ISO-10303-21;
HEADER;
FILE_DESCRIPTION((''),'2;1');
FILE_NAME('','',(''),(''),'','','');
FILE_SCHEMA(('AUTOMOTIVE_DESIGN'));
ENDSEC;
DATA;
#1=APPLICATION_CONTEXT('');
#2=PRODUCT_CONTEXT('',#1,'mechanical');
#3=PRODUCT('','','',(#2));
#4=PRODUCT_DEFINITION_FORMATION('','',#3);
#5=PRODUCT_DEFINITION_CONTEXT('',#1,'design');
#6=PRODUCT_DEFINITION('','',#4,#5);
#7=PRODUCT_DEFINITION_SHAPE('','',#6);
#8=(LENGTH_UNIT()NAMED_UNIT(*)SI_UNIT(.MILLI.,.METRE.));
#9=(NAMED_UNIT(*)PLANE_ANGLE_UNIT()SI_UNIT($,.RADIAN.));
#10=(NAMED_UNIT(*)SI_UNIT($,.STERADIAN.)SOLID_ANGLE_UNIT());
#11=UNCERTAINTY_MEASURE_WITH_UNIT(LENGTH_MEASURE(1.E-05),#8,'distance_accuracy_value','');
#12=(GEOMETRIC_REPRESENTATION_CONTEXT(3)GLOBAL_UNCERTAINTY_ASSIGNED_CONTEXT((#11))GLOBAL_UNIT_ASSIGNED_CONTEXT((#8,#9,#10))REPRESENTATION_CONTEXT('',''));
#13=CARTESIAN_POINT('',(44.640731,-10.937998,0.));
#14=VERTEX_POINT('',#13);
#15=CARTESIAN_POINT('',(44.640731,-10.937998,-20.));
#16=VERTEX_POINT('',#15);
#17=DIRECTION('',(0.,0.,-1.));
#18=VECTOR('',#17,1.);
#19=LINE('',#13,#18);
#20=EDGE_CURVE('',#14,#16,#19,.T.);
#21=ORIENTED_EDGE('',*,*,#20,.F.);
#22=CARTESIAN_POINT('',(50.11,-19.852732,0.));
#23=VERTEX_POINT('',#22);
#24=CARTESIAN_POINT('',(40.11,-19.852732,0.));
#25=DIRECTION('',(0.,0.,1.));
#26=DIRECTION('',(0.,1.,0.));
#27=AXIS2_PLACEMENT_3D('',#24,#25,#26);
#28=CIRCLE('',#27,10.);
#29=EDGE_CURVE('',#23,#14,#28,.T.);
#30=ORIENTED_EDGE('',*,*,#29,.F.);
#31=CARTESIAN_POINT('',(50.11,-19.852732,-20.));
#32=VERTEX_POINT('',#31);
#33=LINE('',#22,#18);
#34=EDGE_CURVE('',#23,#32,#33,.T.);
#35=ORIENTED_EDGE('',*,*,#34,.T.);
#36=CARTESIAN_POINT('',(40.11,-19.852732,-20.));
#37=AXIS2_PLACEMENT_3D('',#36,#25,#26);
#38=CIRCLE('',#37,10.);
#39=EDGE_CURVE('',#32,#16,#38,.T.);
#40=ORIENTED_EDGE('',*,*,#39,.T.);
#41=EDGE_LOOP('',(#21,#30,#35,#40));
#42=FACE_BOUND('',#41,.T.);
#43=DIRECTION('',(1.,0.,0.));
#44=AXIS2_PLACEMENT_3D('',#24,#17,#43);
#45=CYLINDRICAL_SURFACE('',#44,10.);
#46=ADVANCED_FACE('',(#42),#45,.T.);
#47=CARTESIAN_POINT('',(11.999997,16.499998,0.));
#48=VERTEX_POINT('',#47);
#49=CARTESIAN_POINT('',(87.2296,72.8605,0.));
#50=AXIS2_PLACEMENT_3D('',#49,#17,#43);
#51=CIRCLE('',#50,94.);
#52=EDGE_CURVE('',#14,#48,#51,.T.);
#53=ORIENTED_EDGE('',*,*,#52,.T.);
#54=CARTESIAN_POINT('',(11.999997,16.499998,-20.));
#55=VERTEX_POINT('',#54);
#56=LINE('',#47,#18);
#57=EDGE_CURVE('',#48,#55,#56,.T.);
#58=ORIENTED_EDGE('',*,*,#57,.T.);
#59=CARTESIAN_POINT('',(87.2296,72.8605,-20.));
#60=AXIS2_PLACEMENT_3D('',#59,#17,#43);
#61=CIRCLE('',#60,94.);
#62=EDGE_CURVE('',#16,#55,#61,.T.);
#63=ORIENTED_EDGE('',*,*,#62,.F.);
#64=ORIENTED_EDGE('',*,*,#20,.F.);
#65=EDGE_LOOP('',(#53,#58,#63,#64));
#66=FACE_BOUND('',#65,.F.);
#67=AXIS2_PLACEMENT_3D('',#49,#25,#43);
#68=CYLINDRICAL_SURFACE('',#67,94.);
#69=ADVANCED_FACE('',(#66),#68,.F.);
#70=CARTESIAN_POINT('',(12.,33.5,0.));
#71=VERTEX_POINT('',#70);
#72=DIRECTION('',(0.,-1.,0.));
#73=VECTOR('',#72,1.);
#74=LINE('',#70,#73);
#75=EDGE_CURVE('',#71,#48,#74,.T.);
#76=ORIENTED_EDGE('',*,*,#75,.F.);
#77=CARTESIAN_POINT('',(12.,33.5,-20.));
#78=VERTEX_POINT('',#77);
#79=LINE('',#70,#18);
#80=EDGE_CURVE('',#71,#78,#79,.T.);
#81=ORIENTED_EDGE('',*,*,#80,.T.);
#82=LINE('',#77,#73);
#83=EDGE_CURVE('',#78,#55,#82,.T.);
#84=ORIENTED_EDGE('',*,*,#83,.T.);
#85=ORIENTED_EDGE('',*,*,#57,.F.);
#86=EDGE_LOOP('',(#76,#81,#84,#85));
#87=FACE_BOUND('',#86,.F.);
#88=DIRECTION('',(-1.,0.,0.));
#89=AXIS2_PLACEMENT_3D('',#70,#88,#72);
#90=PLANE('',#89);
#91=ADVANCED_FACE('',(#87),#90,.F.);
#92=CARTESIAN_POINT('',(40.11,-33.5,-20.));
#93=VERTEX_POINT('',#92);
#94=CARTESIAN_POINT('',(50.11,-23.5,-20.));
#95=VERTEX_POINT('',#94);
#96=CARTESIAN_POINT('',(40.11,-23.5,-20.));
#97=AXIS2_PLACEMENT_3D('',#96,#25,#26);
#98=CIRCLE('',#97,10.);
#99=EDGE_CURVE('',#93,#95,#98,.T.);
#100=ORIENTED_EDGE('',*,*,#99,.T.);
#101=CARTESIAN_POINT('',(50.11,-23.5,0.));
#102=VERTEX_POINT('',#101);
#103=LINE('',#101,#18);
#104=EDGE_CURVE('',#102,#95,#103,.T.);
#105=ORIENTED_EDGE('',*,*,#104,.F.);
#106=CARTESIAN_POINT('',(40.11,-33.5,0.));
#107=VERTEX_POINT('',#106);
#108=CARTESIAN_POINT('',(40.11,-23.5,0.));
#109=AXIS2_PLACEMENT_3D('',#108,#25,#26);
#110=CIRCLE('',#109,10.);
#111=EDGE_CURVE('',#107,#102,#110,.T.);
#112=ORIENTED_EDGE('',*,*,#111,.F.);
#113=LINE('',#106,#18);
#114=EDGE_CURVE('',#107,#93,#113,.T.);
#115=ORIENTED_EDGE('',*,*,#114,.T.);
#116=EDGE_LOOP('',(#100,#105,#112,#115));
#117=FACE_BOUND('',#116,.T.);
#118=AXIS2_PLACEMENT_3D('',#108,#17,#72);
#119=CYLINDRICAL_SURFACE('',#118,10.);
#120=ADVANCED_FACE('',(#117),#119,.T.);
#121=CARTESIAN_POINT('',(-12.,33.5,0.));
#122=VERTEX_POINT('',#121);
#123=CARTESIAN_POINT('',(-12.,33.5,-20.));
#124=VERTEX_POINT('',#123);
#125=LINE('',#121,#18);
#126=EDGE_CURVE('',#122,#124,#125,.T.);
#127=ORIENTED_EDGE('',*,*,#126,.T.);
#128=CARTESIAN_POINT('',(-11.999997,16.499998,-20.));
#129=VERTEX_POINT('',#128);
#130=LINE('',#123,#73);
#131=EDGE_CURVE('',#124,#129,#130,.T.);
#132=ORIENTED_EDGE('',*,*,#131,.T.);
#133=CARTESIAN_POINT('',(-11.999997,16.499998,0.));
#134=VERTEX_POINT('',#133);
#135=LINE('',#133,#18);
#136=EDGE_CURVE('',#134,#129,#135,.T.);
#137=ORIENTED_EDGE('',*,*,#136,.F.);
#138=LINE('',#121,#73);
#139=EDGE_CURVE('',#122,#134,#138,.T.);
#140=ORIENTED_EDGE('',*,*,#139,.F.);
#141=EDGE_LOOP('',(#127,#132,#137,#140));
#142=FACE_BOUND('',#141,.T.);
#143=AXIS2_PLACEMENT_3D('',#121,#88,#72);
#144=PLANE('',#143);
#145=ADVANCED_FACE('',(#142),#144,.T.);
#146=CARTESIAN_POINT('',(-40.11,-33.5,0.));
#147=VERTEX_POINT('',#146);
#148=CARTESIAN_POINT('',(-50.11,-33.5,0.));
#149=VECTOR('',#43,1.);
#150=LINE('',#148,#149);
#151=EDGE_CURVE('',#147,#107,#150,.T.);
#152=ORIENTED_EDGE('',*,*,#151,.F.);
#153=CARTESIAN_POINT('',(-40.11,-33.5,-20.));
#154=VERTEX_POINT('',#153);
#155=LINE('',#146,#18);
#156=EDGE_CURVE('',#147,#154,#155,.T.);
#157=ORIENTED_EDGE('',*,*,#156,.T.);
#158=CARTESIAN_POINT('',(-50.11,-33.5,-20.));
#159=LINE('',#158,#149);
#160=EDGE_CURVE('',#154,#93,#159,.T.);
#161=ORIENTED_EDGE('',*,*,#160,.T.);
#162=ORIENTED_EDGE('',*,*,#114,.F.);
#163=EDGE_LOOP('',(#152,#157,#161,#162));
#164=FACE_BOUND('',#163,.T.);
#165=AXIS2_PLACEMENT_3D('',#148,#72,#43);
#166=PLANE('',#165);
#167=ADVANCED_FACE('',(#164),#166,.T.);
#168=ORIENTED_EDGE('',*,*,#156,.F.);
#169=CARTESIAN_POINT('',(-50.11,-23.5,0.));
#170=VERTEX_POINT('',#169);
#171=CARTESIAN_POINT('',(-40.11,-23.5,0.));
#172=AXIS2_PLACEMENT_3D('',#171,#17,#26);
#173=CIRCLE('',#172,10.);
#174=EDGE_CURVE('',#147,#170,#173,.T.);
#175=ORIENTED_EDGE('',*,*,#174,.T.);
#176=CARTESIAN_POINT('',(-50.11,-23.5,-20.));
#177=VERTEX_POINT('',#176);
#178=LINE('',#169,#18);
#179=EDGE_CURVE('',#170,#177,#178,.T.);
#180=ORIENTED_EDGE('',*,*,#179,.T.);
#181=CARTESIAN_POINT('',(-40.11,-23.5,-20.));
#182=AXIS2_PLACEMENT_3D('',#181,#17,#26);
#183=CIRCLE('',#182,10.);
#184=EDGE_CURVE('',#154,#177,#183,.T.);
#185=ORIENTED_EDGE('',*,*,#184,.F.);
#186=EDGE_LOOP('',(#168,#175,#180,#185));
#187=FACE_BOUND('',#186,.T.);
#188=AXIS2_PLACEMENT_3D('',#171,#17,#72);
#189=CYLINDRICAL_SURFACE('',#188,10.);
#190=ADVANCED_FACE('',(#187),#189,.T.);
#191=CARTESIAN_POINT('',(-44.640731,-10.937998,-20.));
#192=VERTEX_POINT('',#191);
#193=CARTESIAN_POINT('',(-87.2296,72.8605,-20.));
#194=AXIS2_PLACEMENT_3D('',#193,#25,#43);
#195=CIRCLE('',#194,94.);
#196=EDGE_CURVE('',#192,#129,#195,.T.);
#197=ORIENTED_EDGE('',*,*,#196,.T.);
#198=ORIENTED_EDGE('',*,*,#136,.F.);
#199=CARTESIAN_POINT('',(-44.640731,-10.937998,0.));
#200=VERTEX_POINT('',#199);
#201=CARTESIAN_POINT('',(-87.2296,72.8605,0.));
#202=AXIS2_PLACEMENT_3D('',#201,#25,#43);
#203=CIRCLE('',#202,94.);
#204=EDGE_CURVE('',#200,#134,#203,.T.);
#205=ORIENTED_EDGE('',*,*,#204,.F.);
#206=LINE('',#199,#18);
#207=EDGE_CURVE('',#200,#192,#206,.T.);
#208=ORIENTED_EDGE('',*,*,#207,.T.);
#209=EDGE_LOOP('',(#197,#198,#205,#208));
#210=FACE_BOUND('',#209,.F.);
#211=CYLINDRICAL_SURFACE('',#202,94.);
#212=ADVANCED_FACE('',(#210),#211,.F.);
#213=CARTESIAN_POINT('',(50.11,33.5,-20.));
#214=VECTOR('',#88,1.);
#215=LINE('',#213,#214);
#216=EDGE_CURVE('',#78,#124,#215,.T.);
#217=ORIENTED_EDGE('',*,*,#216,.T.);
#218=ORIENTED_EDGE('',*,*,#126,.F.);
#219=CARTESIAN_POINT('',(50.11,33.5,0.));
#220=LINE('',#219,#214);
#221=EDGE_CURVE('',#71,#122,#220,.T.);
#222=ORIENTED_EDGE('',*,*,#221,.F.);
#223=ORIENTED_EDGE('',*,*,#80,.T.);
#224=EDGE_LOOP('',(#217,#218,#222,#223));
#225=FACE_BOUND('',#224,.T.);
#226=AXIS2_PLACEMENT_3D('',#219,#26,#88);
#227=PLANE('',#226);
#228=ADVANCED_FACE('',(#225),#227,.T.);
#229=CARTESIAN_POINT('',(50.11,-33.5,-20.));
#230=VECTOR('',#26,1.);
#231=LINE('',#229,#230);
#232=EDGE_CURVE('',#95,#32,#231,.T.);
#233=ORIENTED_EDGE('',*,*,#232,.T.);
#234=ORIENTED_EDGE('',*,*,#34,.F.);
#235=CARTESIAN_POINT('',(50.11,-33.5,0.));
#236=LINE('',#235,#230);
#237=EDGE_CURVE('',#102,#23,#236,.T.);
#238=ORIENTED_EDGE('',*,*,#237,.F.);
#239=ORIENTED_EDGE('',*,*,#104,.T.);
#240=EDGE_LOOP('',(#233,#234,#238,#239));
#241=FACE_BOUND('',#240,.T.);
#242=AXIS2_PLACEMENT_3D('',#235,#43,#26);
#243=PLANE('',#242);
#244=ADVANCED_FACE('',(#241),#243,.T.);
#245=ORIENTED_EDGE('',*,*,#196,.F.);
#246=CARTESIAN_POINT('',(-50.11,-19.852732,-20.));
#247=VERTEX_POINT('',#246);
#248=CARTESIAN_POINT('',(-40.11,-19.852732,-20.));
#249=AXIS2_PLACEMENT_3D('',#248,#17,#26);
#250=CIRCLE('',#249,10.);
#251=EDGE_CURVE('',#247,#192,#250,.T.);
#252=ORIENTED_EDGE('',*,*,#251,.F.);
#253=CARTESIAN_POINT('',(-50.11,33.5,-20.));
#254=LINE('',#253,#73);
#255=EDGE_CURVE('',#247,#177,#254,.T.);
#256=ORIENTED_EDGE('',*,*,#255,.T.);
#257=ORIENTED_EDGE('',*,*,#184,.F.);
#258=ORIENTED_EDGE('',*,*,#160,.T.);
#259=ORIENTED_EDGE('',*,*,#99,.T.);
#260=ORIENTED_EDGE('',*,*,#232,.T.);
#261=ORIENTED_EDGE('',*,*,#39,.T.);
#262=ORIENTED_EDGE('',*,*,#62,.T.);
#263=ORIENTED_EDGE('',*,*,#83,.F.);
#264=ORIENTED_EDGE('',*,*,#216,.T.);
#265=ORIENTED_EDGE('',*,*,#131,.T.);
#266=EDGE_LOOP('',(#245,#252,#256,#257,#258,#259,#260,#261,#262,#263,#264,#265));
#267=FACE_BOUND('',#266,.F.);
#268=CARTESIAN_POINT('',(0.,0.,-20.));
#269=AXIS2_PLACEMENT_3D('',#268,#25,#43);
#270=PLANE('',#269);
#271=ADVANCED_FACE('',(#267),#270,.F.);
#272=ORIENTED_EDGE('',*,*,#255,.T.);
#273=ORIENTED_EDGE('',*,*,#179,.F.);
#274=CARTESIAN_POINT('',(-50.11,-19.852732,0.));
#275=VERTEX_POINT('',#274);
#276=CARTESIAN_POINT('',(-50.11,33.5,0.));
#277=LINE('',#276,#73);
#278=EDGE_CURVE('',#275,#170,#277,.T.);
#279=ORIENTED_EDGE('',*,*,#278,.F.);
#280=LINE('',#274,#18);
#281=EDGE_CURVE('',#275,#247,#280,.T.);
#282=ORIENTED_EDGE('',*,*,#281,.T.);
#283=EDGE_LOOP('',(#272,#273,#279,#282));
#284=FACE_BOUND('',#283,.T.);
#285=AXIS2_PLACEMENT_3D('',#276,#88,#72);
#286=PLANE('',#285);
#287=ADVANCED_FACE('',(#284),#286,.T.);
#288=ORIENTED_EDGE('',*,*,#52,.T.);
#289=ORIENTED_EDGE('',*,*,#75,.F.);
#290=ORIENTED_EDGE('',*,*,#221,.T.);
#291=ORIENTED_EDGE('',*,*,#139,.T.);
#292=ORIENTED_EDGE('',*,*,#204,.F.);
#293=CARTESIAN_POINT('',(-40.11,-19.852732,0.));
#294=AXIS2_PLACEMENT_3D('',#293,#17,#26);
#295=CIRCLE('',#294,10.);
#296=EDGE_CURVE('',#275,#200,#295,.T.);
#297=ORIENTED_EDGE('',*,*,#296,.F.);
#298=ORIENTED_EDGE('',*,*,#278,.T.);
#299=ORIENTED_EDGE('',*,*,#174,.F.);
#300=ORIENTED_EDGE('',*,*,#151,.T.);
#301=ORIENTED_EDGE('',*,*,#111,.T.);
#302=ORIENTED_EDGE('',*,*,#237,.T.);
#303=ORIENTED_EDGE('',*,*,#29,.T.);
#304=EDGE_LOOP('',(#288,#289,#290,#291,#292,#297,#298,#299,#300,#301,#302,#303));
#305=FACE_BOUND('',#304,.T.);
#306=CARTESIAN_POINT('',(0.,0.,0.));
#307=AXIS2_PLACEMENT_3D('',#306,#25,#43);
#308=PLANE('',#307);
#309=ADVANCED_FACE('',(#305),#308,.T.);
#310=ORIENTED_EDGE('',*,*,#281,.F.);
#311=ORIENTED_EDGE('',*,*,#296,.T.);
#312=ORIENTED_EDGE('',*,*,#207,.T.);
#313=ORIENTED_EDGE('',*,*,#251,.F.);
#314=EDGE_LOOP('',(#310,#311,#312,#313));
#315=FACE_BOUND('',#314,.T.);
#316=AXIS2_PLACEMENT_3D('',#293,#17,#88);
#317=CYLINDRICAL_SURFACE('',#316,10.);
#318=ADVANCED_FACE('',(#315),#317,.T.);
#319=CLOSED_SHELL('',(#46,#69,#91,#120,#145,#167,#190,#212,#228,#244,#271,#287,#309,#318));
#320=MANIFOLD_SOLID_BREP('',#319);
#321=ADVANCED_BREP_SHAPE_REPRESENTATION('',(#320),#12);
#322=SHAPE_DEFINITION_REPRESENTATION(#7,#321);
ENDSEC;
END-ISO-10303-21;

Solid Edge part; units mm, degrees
sketch "Sketch1" plane through (0, 0, 0) normal (0, 0, 1) x (1, 0, 0)
  line L0 (-50.11, -33.5) -> (50.11, -33.5)
  line L1 (50.11, -33.5) -> (50.11, 33.5)
  line L2 (50.11, 33.5) -> (-50.11, 33.5)
  line L3 (-50.11, 33.5) -> (-50.11, -33.5)
extrude "Protrusion1" add sketch "Sketch1" against normal blind 20
sketch "Sketch2" plane through (0, 0, 0) normal (0, 0, 1) x (1, 0, 0)
  line L0 (-50.11, 33.5) -> (-12, 33.5)
  line L1 (-12, 33.5) -> (-12, 16.5)
  line L2 (-12, 16.5) -> (-50.11, 16.5)
  line L3 (-50.11, 16.5) -> (-50.11, 33.5)
extrude "ExtrudedCutout_1" cut sketch "Sketch2" against normal blind 20
sketch "Sketch3" plane through (0, 0, 0) normal (0, 0, 1) x (1, 0, 0)
  line L0 (50.11, 33.5) -> (12, 33.5)
  line L1 (12, 33.5) -> (12, 16.5)
  line L2 (12, 16.5) -> (50.11, 16.5)
  line L3 (50.11, 16.5) -> (50.11, 33.5)
extrude "ExtrudedCutout_2" cut sketch "Sketch3" against normal blind 20
sketch "Sketch4" plane through (0, 0, 0) normal (0, 0, 1) x (1, 0, 0)
  arc A0 (-50.11, -13.5) -> (-12, 16.5) centre (-87.2296, 72.8605) ccw
  line L0 (-12, 16.5) -> (-50.11, 16.5)
  line L1 (-50.11, 16.5) -> (-50.11, -13.5)
extrude "ExtrudedCutout_3" cut sketch "Sketch4" against normal blind 20
sketch "Sketch5" plane through (0, 0, 0) normal (0, 0, 1) x (1, 0, 0)
  arc A0 (50.11, -13.5) -> (12, 16.5) centre (87.2296, 72.8605) cw
  line L0 (12, 16.5) -> (50.11, 16.5)
  line L1 (50.11, 16.5) -> (50.11, -13.5)
extrude "ExtrudedCutout_4" cut sketch "Sketch5" against normal blind 20
fillet "Round_1" radius 10 4 edges at (50.11, -13.5, -10) (50.11, -33.5, -10) (-50.11, -33.5, -10) (-50.11, -13.5, -10)
